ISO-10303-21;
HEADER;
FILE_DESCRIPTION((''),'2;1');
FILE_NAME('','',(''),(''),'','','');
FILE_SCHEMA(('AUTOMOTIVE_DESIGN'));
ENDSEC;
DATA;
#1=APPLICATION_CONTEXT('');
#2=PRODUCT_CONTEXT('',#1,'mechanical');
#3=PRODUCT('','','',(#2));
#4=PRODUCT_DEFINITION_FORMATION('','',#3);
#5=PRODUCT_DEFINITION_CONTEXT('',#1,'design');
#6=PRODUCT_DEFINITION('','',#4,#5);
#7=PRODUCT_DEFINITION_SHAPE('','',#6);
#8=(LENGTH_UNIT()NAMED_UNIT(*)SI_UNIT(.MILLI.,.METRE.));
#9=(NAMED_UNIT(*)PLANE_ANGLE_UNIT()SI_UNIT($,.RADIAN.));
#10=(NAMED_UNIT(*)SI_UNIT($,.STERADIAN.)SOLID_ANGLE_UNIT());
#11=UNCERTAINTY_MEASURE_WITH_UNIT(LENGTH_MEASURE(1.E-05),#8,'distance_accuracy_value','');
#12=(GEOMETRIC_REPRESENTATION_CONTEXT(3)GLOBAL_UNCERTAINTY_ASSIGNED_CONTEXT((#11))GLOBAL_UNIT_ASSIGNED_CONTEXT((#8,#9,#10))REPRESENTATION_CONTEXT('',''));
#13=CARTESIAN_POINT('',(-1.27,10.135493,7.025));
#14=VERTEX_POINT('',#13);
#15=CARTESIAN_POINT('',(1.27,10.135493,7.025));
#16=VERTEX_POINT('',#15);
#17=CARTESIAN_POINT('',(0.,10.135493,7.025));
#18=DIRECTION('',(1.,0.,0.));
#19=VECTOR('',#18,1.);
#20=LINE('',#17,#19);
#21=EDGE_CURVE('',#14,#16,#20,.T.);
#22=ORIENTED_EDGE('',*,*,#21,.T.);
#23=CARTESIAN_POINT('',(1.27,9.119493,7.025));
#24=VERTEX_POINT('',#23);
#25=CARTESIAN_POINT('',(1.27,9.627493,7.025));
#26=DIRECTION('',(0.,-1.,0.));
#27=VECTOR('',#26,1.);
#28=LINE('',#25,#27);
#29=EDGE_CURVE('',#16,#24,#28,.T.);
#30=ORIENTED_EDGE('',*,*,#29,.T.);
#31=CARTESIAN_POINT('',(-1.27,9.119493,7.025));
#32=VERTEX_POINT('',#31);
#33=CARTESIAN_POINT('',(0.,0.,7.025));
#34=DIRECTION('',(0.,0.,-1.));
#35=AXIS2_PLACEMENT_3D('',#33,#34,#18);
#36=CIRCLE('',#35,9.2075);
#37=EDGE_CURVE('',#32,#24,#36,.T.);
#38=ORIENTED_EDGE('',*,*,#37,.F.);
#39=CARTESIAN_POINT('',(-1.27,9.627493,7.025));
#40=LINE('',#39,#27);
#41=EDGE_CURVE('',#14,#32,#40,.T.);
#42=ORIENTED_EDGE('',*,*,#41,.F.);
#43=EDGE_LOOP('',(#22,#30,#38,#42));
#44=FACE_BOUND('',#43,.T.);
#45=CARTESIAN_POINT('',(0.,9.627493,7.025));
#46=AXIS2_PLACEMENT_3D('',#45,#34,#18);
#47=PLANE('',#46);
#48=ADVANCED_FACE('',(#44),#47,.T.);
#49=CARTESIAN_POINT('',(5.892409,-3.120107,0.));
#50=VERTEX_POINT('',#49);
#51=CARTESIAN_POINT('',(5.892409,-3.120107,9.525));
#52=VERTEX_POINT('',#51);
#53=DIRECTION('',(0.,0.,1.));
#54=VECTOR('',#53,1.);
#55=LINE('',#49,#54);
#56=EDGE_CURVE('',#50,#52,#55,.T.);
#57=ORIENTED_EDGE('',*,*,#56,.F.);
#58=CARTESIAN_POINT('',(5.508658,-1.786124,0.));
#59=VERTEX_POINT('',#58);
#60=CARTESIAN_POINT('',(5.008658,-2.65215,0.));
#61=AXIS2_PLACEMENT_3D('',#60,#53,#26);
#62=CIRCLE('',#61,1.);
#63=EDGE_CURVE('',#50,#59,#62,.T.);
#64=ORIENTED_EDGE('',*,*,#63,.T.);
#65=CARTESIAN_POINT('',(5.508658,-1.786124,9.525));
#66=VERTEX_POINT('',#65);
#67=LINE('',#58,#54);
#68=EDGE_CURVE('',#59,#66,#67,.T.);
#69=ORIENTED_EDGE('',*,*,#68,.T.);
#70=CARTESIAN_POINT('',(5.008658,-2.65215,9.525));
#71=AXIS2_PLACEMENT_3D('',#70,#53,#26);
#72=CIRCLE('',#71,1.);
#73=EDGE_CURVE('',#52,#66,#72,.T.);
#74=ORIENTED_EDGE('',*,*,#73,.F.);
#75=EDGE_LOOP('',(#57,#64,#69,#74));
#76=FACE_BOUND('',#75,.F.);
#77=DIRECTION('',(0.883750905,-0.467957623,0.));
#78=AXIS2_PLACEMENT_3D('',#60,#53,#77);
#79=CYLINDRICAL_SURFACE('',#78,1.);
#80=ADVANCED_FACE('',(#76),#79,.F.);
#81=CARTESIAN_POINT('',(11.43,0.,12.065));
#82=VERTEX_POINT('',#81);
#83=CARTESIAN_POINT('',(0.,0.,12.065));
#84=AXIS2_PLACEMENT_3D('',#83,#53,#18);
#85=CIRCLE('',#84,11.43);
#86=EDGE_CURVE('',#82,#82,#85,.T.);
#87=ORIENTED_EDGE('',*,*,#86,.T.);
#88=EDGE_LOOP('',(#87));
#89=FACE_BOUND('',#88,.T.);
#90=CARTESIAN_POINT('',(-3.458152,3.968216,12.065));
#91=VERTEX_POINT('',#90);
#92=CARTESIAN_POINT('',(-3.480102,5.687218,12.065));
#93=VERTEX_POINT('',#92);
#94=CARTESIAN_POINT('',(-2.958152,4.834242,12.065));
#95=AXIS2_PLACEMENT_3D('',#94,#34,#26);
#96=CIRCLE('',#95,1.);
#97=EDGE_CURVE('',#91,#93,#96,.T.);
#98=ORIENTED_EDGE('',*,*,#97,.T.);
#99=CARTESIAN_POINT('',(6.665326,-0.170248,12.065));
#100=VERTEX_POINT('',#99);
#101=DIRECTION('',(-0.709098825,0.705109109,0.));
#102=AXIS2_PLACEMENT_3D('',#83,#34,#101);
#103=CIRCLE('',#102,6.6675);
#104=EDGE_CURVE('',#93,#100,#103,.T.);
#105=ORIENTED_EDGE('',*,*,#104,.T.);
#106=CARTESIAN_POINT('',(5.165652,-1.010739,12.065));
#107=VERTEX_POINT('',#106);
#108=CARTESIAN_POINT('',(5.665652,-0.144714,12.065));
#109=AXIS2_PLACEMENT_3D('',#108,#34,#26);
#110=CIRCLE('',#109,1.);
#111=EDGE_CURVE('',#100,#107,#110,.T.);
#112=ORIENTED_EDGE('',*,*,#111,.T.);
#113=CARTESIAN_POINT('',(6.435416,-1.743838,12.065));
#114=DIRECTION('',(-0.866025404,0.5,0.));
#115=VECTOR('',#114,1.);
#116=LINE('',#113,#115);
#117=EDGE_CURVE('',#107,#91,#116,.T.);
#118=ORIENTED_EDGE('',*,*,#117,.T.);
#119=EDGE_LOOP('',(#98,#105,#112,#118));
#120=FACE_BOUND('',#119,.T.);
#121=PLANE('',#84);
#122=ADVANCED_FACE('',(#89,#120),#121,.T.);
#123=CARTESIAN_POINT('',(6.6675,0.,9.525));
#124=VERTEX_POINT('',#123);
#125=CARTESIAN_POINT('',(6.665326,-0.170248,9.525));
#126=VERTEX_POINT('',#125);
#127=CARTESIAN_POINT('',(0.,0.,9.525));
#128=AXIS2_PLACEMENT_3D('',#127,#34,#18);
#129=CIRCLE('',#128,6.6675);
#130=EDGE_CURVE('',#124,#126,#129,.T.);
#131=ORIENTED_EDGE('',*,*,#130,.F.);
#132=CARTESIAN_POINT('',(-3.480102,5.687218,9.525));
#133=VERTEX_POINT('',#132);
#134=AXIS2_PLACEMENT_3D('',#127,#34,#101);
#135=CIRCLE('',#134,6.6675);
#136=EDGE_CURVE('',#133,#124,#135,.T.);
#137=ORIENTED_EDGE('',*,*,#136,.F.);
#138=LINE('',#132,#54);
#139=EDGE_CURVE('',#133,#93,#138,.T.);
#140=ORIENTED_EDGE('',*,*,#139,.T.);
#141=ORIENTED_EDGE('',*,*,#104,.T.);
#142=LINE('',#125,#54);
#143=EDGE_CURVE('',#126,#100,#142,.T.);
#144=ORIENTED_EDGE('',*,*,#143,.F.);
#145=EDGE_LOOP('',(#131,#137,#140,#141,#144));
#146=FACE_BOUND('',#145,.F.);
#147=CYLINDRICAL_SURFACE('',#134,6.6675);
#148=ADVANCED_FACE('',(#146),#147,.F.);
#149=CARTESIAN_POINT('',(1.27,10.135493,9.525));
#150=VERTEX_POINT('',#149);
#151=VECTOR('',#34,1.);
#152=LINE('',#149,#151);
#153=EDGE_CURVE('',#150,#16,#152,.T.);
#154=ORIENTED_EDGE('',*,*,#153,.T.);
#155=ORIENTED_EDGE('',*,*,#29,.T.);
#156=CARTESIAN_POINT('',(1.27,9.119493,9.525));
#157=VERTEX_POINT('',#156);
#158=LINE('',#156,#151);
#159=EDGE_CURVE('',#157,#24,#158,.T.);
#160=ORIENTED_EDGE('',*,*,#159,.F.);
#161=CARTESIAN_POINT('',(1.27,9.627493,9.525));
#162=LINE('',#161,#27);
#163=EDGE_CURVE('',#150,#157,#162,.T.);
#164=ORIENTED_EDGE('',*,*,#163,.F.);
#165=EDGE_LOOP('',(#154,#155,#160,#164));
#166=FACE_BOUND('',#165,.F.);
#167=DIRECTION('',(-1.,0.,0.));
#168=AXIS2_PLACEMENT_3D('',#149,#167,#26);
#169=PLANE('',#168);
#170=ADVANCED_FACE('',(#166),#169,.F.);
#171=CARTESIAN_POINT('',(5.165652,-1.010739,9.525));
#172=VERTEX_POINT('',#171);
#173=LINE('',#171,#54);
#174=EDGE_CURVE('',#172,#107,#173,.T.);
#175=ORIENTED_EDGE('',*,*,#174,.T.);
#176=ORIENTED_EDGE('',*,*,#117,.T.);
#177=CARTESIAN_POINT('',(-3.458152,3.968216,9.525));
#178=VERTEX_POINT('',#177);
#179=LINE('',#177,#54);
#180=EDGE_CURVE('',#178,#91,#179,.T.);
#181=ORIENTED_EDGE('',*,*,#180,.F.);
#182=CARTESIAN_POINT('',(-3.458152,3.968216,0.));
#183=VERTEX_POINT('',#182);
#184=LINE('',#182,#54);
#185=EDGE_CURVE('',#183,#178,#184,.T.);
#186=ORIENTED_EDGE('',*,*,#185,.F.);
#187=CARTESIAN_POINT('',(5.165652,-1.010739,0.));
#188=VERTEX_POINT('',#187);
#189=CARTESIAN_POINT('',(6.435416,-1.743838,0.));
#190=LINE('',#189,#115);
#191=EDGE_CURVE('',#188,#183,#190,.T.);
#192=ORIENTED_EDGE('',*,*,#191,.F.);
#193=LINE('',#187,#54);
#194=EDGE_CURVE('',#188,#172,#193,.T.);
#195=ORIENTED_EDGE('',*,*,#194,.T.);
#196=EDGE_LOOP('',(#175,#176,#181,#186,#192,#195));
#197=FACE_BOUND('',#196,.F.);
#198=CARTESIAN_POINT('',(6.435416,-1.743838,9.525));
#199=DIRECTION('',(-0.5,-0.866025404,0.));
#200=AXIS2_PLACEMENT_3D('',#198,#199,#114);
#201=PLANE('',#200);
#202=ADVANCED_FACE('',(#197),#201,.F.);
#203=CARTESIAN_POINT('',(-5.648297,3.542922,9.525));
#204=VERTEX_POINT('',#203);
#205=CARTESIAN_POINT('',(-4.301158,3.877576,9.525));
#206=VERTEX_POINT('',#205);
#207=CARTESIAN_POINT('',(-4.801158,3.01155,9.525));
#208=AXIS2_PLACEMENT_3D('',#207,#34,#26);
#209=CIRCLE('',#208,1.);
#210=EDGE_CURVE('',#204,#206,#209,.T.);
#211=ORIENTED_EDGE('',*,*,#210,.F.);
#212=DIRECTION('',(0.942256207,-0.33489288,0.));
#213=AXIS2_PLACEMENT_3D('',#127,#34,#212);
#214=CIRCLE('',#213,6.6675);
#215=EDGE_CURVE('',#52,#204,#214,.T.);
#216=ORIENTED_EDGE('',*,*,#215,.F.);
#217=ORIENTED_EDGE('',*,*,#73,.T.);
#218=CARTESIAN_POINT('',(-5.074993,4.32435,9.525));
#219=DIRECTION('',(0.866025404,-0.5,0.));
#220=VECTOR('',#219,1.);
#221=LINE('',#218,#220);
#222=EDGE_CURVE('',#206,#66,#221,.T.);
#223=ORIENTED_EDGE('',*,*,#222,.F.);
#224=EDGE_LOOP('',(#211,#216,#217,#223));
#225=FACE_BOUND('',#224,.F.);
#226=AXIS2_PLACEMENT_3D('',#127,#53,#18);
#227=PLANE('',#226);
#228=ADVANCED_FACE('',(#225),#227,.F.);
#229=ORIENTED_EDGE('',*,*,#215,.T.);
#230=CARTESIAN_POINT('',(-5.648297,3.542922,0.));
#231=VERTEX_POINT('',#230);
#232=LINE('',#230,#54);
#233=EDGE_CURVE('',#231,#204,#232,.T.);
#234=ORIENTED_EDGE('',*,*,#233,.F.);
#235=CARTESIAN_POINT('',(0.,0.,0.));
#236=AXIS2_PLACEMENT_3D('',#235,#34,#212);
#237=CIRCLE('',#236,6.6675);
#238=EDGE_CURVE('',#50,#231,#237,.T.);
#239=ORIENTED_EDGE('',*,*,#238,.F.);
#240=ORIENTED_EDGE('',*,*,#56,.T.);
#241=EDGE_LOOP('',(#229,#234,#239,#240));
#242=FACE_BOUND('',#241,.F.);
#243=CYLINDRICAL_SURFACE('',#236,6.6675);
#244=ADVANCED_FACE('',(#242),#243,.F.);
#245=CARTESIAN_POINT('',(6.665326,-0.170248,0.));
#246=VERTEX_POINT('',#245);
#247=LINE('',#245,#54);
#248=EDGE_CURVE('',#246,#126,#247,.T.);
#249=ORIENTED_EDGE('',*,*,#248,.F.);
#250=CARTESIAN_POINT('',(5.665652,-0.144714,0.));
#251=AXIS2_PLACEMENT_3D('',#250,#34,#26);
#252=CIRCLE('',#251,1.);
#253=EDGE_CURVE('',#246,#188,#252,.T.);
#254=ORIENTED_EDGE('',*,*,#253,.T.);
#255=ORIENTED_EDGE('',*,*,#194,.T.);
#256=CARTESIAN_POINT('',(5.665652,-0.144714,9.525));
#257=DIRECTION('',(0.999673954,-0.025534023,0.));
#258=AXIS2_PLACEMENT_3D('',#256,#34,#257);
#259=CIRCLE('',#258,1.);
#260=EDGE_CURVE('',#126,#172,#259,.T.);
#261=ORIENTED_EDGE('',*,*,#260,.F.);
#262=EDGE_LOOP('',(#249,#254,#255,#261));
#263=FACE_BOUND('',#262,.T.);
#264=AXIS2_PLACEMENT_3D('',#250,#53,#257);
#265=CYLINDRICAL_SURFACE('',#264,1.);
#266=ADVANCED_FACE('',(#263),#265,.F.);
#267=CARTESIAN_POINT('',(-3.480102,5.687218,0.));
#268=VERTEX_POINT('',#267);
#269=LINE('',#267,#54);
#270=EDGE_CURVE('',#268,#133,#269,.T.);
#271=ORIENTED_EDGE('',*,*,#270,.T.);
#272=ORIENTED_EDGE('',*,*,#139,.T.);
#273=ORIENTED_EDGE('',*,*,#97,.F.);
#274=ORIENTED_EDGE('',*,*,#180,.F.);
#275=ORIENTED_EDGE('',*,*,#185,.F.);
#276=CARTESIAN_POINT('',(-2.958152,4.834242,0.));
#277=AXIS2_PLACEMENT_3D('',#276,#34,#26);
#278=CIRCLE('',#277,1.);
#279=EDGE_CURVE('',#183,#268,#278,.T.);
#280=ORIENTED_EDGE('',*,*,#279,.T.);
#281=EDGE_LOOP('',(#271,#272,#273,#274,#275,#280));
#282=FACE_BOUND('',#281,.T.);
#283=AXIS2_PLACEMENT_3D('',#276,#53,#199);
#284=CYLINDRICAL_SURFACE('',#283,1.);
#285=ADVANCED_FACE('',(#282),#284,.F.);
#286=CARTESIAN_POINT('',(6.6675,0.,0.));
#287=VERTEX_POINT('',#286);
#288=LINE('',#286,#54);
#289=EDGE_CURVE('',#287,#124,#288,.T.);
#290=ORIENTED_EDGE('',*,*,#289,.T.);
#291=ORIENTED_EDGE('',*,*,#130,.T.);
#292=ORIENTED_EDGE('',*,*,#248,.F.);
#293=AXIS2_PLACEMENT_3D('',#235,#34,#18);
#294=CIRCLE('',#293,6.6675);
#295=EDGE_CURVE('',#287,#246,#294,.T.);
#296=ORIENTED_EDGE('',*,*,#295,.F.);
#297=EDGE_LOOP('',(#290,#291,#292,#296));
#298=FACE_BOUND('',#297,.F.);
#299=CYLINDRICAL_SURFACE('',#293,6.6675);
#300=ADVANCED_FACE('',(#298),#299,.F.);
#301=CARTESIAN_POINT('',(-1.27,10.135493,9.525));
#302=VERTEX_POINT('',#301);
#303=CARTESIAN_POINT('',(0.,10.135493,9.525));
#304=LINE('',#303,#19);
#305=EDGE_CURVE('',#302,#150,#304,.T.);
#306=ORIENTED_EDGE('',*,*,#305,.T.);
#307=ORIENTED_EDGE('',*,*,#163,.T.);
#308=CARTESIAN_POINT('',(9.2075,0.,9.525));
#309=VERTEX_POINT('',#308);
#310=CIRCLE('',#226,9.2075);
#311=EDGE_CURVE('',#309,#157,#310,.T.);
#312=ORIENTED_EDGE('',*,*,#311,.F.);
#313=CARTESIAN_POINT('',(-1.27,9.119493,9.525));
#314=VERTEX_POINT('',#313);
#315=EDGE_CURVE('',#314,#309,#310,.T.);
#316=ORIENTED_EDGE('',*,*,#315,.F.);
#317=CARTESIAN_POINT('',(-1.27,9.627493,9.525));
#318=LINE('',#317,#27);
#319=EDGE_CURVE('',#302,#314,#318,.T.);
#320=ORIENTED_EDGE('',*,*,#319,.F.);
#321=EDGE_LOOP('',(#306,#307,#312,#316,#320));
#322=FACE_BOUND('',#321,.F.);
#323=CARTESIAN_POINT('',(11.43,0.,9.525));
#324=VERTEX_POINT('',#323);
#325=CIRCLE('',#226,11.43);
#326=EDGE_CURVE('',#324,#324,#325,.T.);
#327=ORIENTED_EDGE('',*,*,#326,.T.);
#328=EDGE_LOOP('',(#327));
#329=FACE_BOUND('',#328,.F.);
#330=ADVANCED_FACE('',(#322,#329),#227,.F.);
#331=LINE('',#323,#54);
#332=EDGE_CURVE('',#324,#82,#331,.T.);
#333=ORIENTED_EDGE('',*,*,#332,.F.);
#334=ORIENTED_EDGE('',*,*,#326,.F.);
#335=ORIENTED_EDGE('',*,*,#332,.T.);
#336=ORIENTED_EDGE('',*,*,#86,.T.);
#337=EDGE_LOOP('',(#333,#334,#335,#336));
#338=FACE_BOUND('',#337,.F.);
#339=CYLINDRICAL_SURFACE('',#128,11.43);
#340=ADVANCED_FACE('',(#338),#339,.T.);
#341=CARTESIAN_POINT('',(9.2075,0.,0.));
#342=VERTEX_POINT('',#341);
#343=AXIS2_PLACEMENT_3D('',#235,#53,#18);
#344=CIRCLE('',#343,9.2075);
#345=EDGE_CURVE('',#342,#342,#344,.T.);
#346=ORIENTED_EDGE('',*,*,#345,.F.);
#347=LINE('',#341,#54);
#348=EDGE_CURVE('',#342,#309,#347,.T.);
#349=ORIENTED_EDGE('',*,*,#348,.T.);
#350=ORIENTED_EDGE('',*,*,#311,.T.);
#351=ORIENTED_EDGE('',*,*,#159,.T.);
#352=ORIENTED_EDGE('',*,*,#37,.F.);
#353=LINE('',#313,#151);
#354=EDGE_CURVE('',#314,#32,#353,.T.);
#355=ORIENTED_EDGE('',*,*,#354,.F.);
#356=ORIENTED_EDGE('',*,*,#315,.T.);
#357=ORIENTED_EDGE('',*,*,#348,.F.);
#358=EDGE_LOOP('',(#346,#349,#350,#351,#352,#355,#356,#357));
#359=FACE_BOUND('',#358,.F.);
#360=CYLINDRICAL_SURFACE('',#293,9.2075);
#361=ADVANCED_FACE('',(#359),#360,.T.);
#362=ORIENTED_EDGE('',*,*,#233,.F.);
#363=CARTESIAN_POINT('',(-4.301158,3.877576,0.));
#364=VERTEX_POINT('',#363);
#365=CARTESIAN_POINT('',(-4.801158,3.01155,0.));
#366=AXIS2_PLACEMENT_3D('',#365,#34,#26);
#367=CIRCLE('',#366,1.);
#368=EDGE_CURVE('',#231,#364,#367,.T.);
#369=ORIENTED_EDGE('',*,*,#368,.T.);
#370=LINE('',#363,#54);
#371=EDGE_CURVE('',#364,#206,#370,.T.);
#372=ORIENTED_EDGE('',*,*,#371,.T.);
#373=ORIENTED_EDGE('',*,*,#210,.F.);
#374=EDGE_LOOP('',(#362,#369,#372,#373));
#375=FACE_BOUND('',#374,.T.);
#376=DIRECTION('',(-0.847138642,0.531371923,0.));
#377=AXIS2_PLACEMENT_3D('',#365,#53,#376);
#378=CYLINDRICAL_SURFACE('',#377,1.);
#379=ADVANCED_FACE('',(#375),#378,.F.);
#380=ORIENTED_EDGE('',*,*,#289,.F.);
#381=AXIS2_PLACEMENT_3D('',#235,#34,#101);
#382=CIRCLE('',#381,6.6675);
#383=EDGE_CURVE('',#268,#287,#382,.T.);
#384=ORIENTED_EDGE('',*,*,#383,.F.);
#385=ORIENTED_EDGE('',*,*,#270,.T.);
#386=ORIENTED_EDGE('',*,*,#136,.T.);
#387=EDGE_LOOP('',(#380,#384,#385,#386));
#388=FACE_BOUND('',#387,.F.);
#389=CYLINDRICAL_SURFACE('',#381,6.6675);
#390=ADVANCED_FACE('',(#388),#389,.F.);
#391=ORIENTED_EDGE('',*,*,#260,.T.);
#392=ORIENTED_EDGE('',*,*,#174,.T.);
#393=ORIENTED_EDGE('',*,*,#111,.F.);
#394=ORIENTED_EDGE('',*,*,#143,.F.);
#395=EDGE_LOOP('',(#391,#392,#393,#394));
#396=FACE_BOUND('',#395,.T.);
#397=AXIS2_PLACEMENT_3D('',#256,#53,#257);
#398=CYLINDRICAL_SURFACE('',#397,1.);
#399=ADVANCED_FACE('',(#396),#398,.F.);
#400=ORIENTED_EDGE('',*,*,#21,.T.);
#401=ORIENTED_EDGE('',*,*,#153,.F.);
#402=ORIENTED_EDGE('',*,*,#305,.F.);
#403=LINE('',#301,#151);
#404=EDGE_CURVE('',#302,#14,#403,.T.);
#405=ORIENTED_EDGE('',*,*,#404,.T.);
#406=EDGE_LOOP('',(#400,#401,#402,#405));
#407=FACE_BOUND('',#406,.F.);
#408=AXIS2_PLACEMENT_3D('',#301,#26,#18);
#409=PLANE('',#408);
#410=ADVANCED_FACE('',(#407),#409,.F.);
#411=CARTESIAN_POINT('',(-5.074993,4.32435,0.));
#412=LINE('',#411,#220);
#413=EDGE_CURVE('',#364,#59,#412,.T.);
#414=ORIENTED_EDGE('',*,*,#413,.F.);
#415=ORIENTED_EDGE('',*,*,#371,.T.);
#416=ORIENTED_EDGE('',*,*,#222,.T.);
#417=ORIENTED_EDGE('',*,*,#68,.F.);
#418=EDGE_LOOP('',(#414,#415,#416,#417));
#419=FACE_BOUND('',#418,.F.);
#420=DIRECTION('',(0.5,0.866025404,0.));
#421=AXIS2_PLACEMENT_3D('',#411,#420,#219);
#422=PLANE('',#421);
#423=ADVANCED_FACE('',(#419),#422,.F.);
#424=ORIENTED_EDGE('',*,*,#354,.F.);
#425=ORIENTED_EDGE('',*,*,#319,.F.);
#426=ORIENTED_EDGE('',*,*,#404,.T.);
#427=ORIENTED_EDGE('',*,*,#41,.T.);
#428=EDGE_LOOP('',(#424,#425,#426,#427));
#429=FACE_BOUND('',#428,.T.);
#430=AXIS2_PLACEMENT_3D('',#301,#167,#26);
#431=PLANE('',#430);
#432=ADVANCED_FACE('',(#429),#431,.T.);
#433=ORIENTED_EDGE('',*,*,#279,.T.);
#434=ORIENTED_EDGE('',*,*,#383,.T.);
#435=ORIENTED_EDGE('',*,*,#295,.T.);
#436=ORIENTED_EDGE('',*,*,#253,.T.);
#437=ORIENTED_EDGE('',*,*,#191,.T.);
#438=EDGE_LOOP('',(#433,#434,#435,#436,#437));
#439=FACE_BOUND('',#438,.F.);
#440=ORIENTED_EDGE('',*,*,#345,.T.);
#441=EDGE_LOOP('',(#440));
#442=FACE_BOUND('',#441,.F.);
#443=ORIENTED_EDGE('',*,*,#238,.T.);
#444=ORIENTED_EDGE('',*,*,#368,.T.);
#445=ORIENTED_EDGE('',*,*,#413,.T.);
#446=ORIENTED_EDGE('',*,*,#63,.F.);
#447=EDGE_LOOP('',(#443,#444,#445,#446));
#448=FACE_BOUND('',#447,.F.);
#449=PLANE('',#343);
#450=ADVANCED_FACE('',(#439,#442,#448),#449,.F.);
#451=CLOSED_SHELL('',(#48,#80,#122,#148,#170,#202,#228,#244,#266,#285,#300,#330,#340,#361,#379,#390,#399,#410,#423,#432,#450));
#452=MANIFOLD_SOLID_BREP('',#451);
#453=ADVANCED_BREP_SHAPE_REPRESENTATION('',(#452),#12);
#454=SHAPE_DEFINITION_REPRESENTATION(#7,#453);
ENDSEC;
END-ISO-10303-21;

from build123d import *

# Parameters (mm, degrees)
F0_R     = 9.2075
F1_DEPTH = 9.525
F2_R     = 11.43
F3_DEPTH = 2.54
F4_W     = 2.54
F4_H     = 1.016
F5_DEPTH = 2.5
F6_R     = 1


with BuildPart() as f1:
    # F0 (on Top) → F1 (new body)
    with BuildSketch(Plane.XY):
        Circle(F0_R)
        with BuildLine():
            ThreePointArc((-4.7279164178, 4.7013149858), (2.5428501267, 6.1635598061), (6.6675, 0))
            ThreePointArc((6.6675, 0), (6.6092244332, -0.8796070953), (6.4354164178, -1.7438382319))
            ThreePointArc((6.4354164178, -1.7438382319), (6.3636547335, -1.9898378534), (6.2824932589, -2.2328982741))
            ThreePointArc((6.2824932589, -2.2328982741), (-3.33375, -5.7742243797), (-5.0749932589, 4.3243496242))
            ThreePointArc((-5.0749932589, 4.3243496242), (-4.9050774972, 4.5161677335), (-4.7279164178, 4.7013149858))
        make_face(mode=Mode.SUBTRACT)
        with BuildLine():
            Line((6.4354164178, -1.7438382319), (-4.7279164178, 4.7013149858))
            ThreePointArc((-4.7279164178, 4.7013149858), (-4.9050774972, 4.5161677335), (-5.0749932589, 4.3243496242))
            Line((-5.0749932589, 4.3243496242), (6.2824932589, -2.2328982741))
            ThreePointArc((6.2824932589, -2.2328982741), (6.3636547335, -1.9898378534), (6.4354164178, -1.7438382319))
        make_face()
    extrude(amount=F1_DEPTH)

    # F2 (on face) → F3 (join)
    with BuildSketch(Plane.XY.offset(9.525)):
        Circle(F2_R)
        with BuildLine():
            ThreePointArc((-4.7279164178, 4.7013149858), (3.33375, 5.7742243797), (6.4354164178, -1.7438382319))
            Line((6.4354164178, -1.7438382319), (-4.7279164178, 4.7013149858))
        make_face(mode=Mode.SUBTRACT)
    extrude(amount=F3_DEPTH)

    # F4 (on face) → F5 (join)
    with BuildSketch(Plane(origin=(0, 0, 9.525), x_dir=(1, 0, 0), z_dir=(0, 0, -1))):
        with Locations((0, -9.6274932014)):
            Rectangle(F4_W, F4_H)
    extrude(amount=F5_DEPTH)

    # F6
    f6_edges = [f1.edges().sort_by_distance(p)[0] for p in [
        (-4.727916, 4.701315, 6.0325),
        (6.435416, -1.743838, 6.0325),
        (-5.074993, 4.32435, 4.7625),
        (6.282493, -2.232898, 4.7625),
    ]]
    fillet(f6_edges, radius=F6_R)


solid = f1.part
